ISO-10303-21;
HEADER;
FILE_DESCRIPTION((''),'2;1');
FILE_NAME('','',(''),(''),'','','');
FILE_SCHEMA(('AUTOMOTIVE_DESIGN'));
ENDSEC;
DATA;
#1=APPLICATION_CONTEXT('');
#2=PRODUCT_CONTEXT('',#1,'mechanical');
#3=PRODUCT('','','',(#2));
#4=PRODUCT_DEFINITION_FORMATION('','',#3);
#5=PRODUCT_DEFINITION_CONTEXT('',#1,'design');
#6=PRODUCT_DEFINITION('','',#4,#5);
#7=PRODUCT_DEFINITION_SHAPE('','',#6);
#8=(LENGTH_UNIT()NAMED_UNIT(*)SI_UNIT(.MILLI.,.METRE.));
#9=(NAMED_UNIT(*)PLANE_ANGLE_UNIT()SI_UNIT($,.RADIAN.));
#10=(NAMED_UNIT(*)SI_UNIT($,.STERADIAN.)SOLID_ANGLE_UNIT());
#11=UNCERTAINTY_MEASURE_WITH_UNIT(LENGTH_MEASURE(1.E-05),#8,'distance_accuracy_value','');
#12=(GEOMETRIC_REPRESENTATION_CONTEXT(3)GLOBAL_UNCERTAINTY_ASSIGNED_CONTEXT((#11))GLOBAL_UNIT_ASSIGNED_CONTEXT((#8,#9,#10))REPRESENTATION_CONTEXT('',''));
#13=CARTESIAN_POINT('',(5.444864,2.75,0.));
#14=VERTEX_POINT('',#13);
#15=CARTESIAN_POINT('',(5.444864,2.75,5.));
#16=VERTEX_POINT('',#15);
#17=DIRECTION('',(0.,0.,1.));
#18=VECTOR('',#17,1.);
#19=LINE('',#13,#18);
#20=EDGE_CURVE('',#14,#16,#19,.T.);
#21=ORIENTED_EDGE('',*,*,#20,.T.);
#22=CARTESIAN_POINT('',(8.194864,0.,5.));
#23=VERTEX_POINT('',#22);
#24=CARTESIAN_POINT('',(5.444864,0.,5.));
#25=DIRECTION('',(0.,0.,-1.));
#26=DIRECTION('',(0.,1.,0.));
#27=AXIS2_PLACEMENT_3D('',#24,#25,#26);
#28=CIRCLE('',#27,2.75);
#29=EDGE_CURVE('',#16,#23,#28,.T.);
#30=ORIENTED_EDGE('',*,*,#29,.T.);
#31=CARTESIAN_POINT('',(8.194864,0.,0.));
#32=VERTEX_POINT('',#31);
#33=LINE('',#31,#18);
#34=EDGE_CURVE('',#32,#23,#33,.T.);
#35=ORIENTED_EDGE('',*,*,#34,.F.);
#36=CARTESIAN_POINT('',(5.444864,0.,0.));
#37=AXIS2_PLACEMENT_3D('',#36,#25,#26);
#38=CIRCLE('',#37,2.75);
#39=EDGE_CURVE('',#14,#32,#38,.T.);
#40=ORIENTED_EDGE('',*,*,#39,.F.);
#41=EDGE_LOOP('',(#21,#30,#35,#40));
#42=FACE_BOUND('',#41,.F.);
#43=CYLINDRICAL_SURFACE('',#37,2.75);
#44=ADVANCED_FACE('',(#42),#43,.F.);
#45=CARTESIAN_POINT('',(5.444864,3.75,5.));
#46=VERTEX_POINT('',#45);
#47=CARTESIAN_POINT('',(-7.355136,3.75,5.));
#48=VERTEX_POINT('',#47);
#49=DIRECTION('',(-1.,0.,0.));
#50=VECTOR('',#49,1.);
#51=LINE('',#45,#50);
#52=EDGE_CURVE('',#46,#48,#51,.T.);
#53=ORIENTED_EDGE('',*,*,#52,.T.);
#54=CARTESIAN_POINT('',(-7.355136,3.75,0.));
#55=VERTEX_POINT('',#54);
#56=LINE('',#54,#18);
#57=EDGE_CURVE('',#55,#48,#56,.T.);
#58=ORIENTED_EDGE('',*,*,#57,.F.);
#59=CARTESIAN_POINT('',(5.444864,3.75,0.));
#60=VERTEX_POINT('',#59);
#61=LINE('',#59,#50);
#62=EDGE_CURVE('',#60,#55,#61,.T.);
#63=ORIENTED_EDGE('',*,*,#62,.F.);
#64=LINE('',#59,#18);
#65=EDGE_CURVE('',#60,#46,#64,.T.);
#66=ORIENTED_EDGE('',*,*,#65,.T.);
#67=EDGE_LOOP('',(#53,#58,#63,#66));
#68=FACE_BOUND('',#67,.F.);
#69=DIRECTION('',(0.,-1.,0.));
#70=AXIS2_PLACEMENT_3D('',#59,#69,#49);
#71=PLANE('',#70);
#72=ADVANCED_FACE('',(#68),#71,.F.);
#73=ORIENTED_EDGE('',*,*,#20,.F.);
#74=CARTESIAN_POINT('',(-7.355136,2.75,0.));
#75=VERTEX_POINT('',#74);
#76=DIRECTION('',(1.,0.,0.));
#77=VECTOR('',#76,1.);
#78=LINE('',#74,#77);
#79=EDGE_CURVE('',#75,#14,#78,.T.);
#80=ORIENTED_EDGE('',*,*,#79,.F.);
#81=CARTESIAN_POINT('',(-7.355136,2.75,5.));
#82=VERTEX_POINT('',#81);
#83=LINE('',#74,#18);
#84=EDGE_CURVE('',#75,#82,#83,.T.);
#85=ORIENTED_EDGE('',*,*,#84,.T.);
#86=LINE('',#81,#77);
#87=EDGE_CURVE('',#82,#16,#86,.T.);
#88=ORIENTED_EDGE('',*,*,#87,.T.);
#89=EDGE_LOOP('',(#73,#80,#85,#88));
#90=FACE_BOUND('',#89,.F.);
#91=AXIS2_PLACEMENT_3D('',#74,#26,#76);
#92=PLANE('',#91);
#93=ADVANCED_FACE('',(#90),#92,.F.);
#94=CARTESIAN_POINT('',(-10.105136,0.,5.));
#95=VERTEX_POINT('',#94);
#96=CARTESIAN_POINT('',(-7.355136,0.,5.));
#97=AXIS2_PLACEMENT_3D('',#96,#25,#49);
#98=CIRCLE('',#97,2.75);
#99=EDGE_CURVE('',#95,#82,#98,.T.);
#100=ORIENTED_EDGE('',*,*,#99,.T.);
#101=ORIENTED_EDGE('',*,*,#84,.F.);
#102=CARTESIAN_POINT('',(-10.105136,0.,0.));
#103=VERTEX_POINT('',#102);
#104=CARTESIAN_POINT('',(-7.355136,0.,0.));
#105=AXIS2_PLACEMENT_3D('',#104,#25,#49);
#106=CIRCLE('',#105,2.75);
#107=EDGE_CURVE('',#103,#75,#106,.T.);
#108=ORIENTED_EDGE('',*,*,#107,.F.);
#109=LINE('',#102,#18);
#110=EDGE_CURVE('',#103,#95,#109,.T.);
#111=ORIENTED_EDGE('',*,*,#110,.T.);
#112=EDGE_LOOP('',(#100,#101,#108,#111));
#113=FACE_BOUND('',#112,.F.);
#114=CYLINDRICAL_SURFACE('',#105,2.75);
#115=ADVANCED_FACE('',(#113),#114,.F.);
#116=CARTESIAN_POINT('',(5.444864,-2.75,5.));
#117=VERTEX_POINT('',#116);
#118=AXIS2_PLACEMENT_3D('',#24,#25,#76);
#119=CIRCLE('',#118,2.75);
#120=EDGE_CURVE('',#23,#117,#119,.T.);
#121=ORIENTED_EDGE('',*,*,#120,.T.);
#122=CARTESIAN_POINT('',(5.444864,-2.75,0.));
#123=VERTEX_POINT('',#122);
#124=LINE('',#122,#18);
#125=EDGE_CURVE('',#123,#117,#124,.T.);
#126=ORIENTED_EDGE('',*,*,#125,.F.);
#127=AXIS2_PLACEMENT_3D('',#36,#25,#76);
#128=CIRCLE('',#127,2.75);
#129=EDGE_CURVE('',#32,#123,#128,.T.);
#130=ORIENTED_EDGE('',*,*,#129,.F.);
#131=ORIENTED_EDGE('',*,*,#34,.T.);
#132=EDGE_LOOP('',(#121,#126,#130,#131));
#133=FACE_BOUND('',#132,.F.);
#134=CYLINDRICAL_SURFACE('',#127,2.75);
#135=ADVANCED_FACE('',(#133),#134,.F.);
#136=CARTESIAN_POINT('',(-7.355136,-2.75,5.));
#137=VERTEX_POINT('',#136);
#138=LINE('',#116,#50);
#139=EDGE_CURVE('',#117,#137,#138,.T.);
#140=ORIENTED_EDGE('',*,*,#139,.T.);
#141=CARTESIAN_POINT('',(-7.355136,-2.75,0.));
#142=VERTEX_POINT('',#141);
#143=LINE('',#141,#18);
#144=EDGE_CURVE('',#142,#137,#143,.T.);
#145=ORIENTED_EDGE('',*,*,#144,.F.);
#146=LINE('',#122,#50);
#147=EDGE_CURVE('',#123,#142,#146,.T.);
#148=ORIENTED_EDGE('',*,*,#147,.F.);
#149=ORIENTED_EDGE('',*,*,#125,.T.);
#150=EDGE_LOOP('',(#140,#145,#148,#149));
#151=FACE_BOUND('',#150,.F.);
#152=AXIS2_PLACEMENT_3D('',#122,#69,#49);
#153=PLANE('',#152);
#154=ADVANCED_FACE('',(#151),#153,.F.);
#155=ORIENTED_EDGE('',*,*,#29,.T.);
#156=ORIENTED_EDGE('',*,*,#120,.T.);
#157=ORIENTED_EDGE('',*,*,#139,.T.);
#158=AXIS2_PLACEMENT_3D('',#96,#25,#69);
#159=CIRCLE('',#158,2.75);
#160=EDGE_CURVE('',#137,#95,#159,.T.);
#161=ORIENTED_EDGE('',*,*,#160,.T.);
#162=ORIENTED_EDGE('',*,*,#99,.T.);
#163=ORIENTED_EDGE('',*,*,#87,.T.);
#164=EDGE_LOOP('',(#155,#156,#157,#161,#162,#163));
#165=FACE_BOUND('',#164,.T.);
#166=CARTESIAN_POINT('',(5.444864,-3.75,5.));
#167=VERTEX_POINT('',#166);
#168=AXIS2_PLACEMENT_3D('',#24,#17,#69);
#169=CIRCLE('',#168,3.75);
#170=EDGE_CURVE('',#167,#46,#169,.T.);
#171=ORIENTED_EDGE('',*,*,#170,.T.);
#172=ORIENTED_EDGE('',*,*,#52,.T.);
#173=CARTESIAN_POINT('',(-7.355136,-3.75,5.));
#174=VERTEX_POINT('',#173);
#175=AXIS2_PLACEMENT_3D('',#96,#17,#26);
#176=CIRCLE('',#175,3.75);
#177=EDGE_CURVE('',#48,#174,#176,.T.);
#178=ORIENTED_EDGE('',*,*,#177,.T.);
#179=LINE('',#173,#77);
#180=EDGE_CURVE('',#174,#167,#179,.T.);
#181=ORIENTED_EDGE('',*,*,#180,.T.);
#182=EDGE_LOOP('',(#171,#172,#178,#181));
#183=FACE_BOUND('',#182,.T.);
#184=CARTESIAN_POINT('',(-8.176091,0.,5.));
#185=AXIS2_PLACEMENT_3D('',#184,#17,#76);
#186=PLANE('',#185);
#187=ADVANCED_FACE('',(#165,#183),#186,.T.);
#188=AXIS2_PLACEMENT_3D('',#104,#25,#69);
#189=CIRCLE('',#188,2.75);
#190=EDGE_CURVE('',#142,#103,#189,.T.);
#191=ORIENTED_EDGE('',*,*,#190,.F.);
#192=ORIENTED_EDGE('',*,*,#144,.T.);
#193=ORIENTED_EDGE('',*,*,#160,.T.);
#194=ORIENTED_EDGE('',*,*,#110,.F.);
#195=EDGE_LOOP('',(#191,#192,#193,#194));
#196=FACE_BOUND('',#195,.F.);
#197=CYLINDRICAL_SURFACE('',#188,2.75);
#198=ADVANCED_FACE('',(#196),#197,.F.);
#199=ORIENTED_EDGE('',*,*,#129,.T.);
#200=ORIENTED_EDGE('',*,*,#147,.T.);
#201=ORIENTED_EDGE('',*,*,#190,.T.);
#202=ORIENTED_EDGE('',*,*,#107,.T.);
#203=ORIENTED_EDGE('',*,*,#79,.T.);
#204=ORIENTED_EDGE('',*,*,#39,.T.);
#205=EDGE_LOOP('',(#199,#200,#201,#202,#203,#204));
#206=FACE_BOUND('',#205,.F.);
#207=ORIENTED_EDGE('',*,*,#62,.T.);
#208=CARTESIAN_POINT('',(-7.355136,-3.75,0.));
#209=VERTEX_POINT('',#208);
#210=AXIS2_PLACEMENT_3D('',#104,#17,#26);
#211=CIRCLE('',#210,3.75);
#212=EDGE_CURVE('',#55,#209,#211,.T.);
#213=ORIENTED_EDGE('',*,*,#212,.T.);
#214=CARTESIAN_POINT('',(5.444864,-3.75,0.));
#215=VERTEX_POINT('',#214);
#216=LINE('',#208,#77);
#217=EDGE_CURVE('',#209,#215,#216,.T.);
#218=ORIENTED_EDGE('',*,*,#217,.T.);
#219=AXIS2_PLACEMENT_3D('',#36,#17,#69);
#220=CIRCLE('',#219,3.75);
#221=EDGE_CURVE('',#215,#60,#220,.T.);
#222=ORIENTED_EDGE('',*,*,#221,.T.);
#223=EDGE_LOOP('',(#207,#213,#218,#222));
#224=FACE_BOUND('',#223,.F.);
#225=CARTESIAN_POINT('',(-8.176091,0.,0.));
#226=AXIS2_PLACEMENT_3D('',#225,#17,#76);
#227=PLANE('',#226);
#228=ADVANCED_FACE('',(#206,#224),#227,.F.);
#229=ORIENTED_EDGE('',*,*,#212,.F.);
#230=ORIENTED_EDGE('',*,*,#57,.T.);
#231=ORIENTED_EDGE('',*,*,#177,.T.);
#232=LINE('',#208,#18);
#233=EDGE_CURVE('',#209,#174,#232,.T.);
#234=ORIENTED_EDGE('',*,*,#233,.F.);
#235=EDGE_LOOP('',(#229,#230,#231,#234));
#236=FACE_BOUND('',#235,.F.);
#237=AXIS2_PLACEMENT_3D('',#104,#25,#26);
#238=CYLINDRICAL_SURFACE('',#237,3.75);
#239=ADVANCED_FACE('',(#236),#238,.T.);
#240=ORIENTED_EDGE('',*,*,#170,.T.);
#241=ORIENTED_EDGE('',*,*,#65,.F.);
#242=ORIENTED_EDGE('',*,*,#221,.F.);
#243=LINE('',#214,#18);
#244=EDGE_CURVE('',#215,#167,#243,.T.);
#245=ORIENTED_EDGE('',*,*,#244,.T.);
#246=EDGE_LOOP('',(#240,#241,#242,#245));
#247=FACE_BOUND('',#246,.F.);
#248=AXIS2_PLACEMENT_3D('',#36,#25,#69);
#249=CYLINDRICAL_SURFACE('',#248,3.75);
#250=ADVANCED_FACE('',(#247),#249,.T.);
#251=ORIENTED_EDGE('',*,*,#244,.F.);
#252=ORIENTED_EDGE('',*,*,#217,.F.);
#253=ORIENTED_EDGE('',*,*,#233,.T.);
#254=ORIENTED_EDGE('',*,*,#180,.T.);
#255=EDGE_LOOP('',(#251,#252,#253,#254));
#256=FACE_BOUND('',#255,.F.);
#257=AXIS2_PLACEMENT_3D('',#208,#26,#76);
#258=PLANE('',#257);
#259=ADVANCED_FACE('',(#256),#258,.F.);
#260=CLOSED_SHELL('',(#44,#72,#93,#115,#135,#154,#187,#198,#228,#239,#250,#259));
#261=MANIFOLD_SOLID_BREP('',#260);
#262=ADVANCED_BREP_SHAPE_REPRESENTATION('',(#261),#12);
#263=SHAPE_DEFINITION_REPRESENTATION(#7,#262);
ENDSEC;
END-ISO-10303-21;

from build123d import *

# Parameters (mm, degrees)
F1_DEPTH = 5


with BuildPart() as f1:
    # F0 (on Top) → F1 (new body)
    with BuildSketch(Plane.XY):
        with BuildLine():
            ThreePointArc((-10.1051355834, 0), (-9.2996792316, 1.9445436483), (-7.3551355834, 2.75))
            Line((-7.3551355834, 2.75), (-4.8056258266, 2.75))
            ThreePointArc((-4.8056258266, 2.75), (-5.9858291896, 3.4910600109), (-7.3551355834, 3.75))
            ThreePointArc((-7.3551355834, 3.75), (-11.1051355834, 0), (-7.3551355834, -3.75))
            ThreePointArc((-7.3551355834, -3.75), (-5.9858291896, -3.4910600109), (-4.8056258266, -2.75))
            Line((-4.8056258266, -2.75), (-7.3551355834, -2.75))
            ThreePointArc((-7.3551355834, -2.75), (-9.2996792316, -1.9445436483), (-10.1051355834, 0))
        make_face()
        with BuildLine():
            ThreePointArc((-7.3551355834, 3.75), (-5.9858291896, 3.4910600109), (-4.8056258266, 2.75))
            Line((-4.8056258266, 2.75), (2.8953546598, 2.75))
            ThreePointArc((2.8953546598, 2.75), (4.0755580229, 3.4910600109), (5.4448644166, 3.75))
            Line((5.4448644166, 3.75), (-7.3551355834, 3.75))
        make_face()
        with BuildLine():
            ThreePointArc((5.4448644166, 3.75), (4.0755580229, 3.4910600109), (2.8953546598, 2.75))
            Line((2.8953546598, 2.75), (5.4448644166, 2.75))
            ThreePointArc((5.4448644166, 2.75), (7.3894080649, 1.9445436483), (8.1948644166, 0))
            ThreePointArc((8.1948644166, 0), (7.3894080649, -1.9445436483), (5.4448644166, -2.75))
            Line((5.4448644166, -2.75), (2.8953546598, -2.75))
            ThreePointArc((2.8953546598, -2.75), (4.0755580229, -3.4910600109), (5.4448644166, -3.75))
            ThreePointArc((5.4448644166, -3.75), (8.0965148461, -2.6516504294), (9.1948644166, 0))
            ThreePointArc((9.1948644166, 0), (8.0965148461, 2.6516504294), (5.4448644166, 3.75))
        make_face()
        with BuildLine():
            Line((2.8953546598, -2.75), (-4.8056258266, -2.75))
            ThreePointArc((-4.8056258266, -2.75), (-5.9858291896, -3.4910600109), (-7.3551355834, -3.75))
            Line((-7.3551355834, -3.75), (5.4448644166, -3.75))
            ThreePointArc((5.4448644166, -3.75), (4.0755580229, -3.4910600109), (2.8953546598, -2.75))
        make_face()
    extrude(amount=F1_DEPTH)


solid = f1.part
